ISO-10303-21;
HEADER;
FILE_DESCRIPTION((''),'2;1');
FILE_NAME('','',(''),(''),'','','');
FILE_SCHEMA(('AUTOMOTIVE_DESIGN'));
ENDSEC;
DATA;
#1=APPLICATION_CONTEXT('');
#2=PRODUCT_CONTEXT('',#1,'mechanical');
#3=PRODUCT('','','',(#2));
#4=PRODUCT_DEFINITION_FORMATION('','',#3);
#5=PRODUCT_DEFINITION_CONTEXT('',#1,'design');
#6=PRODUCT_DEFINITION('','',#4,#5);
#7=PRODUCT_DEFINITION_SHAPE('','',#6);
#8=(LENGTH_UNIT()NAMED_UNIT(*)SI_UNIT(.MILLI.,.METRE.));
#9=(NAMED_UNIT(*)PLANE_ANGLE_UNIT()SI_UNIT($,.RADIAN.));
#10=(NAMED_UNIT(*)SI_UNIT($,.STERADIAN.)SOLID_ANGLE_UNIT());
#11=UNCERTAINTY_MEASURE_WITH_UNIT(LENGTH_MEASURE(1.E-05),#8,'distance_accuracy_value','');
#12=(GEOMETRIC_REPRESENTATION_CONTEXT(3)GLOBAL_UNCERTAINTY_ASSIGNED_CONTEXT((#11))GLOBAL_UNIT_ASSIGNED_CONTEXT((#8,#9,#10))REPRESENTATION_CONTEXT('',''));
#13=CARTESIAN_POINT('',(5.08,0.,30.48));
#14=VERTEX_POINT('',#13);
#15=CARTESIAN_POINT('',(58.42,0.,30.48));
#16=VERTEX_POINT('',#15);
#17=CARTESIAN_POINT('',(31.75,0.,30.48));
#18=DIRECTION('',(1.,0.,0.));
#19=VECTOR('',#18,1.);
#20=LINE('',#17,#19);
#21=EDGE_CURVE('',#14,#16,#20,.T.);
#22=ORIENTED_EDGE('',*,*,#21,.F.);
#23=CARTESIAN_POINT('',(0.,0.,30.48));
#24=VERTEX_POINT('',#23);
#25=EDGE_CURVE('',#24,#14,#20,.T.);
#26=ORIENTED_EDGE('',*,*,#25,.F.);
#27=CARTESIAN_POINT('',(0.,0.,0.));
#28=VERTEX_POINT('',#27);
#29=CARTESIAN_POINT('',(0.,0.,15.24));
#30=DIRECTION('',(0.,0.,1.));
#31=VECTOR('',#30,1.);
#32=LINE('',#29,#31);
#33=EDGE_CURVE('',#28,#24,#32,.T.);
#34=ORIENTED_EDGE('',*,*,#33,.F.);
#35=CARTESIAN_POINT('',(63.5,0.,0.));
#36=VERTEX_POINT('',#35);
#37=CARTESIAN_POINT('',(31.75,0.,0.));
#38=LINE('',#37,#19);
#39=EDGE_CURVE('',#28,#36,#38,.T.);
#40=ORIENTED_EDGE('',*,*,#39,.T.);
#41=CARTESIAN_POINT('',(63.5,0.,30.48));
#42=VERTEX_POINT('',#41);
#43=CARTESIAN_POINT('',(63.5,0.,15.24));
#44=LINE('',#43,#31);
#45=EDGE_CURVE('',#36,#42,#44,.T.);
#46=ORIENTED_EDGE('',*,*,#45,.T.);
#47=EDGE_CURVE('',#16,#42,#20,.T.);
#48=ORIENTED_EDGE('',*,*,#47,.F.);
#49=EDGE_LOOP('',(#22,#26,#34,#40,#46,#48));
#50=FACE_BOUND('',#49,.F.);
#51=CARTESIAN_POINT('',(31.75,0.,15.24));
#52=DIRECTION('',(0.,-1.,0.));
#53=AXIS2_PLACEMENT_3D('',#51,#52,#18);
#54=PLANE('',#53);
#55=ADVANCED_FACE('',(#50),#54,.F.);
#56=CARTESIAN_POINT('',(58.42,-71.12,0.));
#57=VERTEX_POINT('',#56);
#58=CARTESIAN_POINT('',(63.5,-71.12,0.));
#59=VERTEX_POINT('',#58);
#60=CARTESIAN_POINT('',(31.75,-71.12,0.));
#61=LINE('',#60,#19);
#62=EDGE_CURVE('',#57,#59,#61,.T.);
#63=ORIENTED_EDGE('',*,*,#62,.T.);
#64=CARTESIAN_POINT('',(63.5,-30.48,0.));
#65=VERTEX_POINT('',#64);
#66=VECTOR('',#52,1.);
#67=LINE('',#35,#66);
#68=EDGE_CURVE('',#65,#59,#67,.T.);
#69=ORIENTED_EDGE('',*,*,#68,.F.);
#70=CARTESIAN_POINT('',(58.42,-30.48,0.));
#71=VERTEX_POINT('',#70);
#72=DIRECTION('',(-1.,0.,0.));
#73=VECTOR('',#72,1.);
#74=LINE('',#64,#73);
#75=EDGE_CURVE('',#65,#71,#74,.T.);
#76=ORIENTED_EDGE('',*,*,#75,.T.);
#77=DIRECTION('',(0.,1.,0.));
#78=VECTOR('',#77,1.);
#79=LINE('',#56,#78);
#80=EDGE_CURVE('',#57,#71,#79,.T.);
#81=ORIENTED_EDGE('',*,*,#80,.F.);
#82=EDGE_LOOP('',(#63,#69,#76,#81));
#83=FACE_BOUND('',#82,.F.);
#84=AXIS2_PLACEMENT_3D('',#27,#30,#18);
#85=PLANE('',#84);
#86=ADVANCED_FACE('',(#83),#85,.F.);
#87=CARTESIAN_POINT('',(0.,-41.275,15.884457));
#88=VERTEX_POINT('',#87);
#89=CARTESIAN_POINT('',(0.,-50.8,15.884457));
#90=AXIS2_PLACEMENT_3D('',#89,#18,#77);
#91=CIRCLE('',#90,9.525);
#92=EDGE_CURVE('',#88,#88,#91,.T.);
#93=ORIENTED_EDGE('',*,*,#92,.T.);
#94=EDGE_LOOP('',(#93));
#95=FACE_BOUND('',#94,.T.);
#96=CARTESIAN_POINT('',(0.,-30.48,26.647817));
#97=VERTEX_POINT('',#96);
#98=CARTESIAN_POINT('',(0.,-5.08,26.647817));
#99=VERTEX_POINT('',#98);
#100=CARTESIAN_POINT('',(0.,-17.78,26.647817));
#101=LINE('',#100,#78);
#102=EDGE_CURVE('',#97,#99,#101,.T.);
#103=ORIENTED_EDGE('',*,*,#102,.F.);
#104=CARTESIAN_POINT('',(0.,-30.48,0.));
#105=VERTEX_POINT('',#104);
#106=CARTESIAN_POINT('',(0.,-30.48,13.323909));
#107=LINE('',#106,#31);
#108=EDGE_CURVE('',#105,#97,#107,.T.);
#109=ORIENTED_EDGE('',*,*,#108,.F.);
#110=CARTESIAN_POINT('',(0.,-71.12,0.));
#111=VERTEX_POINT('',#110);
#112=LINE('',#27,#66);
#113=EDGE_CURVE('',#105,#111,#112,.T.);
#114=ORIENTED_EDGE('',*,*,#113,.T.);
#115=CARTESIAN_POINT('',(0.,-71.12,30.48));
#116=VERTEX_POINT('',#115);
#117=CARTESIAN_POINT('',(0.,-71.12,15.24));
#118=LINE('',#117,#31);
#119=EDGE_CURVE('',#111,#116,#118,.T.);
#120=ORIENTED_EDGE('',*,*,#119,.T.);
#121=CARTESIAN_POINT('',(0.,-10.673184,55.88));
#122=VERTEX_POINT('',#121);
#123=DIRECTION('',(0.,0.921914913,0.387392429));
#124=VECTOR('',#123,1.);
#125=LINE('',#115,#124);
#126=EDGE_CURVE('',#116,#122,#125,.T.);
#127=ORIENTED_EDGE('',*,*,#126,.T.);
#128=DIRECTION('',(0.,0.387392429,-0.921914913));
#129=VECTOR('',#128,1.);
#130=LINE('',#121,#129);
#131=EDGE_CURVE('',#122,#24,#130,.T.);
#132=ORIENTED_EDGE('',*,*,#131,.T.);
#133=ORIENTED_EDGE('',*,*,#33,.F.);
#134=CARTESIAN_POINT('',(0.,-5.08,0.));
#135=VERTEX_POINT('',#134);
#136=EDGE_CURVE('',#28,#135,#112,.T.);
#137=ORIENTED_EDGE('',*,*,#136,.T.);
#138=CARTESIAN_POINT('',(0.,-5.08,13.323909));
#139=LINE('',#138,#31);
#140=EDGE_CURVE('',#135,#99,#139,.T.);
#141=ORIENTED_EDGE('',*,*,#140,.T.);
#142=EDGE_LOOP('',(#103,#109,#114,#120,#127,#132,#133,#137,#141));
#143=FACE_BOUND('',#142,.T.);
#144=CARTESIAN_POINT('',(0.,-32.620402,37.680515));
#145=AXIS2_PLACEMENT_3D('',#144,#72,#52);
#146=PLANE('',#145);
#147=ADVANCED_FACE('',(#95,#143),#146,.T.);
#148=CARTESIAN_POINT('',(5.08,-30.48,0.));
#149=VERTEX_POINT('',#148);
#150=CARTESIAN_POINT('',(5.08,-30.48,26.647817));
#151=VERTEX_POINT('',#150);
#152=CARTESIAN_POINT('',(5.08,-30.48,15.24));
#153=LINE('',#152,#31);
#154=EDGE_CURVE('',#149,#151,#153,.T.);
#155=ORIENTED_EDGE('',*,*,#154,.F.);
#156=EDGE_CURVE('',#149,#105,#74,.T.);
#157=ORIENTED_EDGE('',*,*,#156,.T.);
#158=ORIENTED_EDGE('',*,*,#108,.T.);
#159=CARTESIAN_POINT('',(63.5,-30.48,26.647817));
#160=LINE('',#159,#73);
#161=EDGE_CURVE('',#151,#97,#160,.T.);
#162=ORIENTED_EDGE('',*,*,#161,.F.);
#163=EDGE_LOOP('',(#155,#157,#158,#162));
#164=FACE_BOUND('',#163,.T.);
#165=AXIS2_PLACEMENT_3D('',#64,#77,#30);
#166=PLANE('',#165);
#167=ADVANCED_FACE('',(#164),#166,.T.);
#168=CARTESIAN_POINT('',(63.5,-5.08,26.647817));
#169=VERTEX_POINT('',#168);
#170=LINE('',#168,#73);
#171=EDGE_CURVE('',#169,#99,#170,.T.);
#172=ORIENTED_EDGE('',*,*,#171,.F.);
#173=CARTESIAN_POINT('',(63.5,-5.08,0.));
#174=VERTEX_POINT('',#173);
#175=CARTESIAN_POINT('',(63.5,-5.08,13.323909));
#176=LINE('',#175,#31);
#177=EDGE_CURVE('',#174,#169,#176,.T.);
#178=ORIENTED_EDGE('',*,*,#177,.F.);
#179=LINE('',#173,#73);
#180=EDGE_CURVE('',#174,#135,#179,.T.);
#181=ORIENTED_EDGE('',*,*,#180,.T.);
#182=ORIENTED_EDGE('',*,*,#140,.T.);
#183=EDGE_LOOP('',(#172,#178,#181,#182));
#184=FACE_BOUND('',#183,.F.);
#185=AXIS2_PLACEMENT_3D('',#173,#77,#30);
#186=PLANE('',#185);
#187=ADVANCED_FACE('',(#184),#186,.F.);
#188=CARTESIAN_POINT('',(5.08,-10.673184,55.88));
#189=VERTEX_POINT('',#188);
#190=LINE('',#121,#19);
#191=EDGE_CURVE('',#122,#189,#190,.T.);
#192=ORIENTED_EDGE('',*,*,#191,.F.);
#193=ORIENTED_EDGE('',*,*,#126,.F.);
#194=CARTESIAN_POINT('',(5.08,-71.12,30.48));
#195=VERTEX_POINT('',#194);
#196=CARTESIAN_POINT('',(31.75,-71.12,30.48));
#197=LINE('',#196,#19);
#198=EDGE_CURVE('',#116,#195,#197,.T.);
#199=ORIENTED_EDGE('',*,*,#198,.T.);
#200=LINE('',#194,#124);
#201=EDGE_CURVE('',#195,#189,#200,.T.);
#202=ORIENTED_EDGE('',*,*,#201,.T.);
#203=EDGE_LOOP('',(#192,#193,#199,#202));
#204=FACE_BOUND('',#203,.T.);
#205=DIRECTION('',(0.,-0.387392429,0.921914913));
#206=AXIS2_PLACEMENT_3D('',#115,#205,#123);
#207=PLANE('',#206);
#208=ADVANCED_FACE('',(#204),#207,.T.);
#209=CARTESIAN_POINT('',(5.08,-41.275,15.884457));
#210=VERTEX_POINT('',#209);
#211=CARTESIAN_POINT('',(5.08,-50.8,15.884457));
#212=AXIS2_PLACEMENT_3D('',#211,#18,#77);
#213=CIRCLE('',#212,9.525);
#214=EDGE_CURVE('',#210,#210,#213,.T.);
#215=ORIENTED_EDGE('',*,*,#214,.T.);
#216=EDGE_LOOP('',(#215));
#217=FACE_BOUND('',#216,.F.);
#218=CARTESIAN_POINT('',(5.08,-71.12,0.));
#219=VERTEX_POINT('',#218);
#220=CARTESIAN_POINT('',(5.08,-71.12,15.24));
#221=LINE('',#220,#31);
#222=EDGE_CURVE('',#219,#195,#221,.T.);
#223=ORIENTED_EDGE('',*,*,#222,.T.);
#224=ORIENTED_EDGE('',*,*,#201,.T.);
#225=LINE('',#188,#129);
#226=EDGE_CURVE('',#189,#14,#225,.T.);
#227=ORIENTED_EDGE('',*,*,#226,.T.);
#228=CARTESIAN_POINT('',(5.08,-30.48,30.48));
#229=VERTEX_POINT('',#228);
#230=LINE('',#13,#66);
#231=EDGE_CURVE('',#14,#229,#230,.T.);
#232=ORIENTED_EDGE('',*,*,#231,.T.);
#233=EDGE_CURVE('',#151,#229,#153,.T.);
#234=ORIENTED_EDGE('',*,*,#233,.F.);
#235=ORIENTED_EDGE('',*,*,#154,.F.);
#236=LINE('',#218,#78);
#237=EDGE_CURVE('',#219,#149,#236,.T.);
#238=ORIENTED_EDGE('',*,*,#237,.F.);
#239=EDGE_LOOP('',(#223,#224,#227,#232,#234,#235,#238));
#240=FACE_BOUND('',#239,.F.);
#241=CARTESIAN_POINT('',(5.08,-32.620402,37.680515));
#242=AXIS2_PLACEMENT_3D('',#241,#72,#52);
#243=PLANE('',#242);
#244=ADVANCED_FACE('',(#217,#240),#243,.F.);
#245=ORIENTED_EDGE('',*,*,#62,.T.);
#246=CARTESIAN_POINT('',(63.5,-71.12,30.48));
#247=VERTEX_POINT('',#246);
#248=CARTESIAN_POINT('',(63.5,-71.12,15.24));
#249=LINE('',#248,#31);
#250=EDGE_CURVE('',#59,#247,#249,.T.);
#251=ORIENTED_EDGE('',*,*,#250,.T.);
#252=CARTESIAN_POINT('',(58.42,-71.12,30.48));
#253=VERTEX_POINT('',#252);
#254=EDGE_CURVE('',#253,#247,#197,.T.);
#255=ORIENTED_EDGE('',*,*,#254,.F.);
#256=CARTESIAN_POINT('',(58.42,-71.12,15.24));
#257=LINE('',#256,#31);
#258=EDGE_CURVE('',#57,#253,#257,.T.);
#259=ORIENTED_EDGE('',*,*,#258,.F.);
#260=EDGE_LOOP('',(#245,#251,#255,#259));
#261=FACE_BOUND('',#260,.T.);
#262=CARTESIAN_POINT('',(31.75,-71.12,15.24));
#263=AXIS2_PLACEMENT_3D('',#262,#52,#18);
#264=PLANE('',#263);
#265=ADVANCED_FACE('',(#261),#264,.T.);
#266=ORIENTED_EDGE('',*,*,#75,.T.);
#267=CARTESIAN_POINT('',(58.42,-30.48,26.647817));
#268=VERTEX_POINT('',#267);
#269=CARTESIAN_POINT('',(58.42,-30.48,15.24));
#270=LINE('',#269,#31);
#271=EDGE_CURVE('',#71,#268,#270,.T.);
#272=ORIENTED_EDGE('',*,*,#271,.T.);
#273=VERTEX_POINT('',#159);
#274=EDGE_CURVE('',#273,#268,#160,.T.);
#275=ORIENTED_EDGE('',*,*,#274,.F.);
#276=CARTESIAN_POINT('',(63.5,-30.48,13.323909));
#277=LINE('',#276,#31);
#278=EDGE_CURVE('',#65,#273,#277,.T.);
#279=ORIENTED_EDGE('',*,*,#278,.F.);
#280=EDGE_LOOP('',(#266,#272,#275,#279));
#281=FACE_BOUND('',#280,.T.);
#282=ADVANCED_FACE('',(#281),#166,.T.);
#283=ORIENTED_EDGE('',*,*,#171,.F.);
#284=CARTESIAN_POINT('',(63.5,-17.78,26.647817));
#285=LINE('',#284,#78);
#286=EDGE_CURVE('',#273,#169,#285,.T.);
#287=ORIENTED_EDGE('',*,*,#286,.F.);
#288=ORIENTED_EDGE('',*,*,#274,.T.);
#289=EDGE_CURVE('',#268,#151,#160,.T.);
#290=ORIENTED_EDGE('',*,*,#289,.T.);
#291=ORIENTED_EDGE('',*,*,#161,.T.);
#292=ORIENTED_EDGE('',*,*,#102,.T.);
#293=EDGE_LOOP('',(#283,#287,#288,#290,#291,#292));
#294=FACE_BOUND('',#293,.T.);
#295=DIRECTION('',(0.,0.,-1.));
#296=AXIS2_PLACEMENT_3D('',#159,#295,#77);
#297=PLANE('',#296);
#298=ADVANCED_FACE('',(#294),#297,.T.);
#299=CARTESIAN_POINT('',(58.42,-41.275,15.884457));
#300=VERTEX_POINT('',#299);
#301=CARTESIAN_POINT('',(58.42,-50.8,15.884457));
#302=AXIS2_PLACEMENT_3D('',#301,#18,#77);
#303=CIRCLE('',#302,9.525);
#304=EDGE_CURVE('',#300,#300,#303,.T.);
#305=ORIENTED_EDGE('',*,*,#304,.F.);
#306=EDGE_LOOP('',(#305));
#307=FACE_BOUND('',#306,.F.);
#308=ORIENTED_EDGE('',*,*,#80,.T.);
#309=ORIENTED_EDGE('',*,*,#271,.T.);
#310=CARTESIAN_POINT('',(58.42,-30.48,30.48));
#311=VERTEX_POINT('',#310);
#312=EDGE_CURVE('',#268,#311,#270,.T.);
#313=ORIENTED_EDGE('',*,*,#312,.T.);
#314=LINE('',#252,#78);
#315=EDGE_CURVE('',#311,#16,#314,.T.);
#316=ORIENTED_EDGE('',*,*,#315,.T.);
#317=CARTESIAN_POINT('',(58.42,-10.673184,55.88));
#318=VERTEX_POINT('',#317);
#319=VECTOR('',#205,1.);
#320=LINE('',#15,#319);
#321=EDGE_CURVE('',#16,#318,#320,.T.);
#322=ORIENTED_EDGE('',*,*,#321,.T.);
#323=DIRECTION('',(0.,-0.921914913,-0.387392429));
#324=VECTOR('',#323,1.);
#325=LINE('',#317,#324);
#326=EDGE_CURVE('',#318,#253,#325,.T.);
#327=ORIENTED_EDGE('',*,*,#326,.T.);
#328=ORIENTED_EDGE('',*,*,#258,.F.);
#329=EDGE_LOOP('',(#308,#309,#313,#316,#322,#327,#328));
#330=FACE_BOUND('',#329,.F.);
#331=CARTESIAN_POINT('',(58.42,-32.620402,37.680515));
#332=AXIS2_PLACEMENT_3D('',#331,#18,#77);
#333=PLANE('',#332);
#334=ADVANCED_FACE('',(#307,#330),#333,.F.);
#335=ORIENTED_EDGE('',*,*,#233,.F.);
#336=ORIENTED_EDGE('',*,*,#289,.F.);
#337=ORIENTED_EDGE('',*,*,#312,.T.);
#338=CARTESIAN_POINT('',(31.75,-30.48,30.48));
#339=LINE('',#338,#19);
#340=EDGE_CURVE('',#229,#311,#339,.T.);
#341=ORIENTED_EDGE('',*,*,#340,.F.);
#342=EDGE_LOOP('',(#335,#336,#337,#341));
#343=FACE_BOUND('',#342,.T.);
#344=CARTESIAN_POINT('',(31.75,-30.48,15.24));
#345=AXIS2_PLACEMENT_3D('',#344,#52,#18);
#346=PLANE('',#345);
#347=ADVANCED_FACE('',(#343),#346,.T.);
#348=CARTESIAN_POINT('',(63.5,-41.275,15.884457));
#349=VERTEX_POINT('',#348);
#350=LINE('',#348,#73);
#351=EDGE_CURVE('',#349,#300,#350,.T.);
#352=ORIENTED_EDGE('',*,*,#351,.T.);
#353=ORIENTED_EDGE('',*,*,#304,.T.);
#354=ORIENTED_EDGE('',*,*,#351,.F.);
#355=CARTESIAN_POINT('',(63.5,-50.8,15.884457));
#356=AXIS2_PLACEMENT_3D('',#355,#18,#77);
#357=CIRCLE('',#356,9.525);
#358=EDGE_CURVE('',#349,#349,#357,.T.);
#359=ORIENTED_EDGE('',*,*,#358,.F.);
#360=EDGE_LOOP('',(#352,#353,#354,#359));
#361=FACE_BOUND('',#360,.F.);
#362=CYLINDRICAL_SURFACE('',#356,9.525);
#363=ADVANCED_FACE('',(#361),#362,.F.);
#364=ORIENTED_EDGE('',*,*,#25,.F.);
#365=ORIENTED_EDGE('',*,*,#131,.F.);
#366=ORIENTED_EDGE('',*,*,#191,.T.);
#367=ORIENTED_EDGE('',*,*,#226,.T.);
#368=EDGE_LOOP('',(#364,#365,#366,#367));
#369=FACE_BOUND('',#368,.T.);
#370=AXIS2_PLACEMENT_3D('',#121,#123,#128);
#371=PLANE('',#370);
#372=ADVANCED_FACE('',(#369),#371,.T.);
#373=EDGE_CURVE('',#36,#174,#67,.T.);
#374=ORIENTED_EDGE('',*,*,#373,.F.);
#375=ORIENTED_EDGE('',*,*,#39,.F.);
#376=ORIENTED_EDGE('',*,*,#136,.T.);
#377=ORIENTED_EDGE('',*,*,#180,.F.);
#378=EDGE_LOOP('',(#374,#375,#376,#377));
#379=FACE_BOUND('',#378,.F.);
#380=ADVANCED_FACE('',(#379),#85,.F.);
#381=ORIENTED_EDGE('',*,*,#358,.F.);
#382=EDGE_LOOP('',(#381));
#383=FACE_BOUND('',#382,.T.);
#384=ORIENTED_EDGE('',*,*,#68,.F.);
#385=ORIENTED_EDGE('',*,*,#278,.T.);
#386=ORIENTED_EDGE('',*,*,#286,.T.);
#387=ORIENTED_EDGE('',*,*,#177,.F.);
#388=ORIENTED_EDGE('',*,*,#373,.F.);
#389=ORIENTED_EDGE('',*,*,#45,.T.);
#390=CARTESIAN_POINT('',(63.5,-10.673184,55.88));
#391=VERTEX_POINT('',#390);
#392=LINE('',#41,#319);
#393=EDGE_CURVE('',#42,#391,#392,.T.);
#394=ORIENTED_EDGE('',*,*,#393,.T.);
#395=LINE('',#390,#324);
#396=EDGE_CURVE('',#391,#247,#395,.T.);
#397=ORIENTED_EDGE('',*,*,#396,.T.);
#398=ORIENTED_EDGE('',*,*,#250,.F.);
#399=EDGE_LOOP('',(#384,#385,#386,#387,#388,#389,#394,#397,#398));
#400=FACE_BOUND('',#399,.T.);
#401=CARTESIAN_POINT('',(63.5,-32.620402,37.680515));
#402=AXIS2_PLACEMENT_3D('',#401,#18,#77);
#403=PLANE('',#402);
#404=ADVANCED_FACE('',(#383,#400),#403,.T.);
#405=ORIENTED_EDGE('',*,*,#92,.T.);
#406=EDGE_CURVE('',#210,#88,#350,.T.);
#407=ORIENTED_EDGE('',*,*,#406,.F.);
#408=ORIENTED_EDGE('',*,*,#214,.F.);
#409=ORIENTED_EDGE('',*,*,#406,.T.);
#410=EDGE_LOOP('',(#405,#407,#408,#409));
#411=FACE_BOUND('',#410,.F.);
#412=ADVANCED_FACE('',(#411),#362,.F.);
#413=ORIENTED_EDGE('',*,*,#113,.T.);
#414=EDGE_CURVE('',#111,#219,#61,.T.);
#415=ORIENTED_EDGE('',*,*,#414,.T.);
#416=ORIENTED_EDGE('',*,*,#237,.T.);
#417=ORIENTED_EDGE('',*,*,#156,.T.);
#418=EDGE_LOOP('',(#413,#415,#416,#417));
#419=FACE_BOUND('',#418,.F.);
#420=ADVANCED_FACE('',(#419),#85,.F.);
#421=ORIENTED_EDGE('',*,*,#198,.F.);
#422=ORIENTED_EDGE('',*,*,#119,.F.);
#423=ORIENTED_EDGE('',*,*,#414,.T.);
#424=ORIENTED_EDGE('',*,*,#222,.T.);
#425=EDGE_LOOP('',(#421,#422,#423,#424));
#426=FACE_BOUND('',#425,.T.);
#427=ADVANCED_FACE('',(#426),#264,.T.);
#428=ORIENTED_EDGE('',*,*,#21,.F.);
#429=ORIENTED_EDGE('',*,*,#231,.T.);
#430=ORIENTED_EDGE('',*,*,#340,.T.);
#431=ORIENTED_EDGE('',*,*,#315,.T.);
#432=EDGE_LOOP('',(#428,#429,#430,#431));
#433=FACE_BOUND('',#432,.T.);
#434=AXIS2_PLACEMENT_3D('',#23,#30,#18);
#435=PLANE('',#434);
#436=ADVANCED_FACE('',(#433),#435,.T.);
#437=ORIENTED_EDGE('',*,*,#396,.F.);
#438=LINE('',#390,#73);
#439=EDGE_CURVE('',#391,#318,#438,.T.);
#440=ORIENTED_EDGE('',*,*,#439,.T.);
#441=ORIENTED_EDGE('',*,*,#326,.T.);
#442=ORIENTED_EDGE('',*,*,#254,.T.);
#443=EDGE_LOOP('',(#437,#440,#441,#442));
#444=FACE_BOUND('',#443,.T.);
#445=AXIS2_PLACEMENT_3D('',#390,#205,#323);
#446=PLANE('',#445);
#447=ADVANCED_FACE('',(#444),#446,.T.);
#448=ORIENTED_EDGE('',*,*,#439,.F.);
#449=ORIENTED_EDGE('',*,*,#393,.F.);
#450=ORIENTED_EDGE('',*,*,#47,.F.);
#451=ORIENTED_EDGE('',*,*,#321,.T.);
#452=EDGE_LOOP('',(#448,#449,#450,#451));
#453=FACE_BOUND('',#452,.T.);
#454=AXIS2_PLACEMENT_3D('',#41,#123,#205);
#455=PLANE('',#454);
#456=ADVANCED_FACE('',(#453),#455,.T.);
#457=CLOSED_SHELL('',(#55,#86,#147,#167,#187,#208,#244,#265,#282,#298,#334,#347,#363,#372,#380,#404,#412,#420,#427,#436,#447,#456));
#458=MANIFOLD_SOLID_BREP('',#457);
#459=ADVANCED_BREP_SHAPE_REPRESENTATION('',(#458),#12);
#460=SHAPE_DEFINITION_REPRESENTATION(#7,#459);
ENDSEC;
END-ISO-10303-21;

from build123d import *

# Parameters (mm, degrees)
F0_W     = 63.5
F0_H     = 30.48
F1_DEPTH = 71.12
F2_W     = 53.34
F2_H     = 30.48
F3_DEPTH = 40.64
F4_R     = 9.525
F4_W     = 25.4
F4_H     = 26.6478173435
F5_DEPTH = 63.5
F7_DEPTH = 5.08
F9_DEPTH = 5.08


# Not quite as in the source:
# - a feature names something its author has since deleted; it is built from what else it names


with BuildPart() as f1:
    # F0 (on Front) → F1 (new body)
    with BuildSketch(Plane.XZ):
        with Locations((31.75, 15.24)):
            Rectangle(F0_W, F0_H)
    extrude(amount=F1_DEPTH)

    # F2 (on face) → F3 (cut)
    with BuildSketch(Plane.XZ.offset(71.12)):
        with Locations((31.75, 15.24)):
            Rectangle(F2_W, F2_H)
    extrude(amount=-F3_DEPTH, mode=Mode.SUBTRACT)

    # F4 (on face) → F5 (cut)
    with BuildSketch(Plane.YZ.offset(63.5)):
        with Locations((-50.8, 15.8844571561)):
            Circle(F4_R)
        with Locations((-17.78, 13.3239086717)):
            Rectangle(F4_W, F4_H)
    extrude(amount=-F5_DEPTH, mode=Mode.SUBTRACT)

    # F6 (on face) → F7 (join)
    with BuildSketch(Plane.YZ.offset(63.5)):
        Polygon((-10.6731842133, 55.88), (-71.12, 30.48), (0, 30.48), align=None)
    extrude(amount=-F7_DEPTH)

    # F8 (on face) → F9 (join)
    with BuildSketch(Plane(origin=(0, 0, 0), x_dir=(0, -1, 0), z_dir=(-1, 0, 0))):
        Polygon((10.6731842133, 55.88), (0, 30.48), (71.12, 30.48), align=None)
    extrude(amount=-F9_DEPTH)


solid = f1.part
